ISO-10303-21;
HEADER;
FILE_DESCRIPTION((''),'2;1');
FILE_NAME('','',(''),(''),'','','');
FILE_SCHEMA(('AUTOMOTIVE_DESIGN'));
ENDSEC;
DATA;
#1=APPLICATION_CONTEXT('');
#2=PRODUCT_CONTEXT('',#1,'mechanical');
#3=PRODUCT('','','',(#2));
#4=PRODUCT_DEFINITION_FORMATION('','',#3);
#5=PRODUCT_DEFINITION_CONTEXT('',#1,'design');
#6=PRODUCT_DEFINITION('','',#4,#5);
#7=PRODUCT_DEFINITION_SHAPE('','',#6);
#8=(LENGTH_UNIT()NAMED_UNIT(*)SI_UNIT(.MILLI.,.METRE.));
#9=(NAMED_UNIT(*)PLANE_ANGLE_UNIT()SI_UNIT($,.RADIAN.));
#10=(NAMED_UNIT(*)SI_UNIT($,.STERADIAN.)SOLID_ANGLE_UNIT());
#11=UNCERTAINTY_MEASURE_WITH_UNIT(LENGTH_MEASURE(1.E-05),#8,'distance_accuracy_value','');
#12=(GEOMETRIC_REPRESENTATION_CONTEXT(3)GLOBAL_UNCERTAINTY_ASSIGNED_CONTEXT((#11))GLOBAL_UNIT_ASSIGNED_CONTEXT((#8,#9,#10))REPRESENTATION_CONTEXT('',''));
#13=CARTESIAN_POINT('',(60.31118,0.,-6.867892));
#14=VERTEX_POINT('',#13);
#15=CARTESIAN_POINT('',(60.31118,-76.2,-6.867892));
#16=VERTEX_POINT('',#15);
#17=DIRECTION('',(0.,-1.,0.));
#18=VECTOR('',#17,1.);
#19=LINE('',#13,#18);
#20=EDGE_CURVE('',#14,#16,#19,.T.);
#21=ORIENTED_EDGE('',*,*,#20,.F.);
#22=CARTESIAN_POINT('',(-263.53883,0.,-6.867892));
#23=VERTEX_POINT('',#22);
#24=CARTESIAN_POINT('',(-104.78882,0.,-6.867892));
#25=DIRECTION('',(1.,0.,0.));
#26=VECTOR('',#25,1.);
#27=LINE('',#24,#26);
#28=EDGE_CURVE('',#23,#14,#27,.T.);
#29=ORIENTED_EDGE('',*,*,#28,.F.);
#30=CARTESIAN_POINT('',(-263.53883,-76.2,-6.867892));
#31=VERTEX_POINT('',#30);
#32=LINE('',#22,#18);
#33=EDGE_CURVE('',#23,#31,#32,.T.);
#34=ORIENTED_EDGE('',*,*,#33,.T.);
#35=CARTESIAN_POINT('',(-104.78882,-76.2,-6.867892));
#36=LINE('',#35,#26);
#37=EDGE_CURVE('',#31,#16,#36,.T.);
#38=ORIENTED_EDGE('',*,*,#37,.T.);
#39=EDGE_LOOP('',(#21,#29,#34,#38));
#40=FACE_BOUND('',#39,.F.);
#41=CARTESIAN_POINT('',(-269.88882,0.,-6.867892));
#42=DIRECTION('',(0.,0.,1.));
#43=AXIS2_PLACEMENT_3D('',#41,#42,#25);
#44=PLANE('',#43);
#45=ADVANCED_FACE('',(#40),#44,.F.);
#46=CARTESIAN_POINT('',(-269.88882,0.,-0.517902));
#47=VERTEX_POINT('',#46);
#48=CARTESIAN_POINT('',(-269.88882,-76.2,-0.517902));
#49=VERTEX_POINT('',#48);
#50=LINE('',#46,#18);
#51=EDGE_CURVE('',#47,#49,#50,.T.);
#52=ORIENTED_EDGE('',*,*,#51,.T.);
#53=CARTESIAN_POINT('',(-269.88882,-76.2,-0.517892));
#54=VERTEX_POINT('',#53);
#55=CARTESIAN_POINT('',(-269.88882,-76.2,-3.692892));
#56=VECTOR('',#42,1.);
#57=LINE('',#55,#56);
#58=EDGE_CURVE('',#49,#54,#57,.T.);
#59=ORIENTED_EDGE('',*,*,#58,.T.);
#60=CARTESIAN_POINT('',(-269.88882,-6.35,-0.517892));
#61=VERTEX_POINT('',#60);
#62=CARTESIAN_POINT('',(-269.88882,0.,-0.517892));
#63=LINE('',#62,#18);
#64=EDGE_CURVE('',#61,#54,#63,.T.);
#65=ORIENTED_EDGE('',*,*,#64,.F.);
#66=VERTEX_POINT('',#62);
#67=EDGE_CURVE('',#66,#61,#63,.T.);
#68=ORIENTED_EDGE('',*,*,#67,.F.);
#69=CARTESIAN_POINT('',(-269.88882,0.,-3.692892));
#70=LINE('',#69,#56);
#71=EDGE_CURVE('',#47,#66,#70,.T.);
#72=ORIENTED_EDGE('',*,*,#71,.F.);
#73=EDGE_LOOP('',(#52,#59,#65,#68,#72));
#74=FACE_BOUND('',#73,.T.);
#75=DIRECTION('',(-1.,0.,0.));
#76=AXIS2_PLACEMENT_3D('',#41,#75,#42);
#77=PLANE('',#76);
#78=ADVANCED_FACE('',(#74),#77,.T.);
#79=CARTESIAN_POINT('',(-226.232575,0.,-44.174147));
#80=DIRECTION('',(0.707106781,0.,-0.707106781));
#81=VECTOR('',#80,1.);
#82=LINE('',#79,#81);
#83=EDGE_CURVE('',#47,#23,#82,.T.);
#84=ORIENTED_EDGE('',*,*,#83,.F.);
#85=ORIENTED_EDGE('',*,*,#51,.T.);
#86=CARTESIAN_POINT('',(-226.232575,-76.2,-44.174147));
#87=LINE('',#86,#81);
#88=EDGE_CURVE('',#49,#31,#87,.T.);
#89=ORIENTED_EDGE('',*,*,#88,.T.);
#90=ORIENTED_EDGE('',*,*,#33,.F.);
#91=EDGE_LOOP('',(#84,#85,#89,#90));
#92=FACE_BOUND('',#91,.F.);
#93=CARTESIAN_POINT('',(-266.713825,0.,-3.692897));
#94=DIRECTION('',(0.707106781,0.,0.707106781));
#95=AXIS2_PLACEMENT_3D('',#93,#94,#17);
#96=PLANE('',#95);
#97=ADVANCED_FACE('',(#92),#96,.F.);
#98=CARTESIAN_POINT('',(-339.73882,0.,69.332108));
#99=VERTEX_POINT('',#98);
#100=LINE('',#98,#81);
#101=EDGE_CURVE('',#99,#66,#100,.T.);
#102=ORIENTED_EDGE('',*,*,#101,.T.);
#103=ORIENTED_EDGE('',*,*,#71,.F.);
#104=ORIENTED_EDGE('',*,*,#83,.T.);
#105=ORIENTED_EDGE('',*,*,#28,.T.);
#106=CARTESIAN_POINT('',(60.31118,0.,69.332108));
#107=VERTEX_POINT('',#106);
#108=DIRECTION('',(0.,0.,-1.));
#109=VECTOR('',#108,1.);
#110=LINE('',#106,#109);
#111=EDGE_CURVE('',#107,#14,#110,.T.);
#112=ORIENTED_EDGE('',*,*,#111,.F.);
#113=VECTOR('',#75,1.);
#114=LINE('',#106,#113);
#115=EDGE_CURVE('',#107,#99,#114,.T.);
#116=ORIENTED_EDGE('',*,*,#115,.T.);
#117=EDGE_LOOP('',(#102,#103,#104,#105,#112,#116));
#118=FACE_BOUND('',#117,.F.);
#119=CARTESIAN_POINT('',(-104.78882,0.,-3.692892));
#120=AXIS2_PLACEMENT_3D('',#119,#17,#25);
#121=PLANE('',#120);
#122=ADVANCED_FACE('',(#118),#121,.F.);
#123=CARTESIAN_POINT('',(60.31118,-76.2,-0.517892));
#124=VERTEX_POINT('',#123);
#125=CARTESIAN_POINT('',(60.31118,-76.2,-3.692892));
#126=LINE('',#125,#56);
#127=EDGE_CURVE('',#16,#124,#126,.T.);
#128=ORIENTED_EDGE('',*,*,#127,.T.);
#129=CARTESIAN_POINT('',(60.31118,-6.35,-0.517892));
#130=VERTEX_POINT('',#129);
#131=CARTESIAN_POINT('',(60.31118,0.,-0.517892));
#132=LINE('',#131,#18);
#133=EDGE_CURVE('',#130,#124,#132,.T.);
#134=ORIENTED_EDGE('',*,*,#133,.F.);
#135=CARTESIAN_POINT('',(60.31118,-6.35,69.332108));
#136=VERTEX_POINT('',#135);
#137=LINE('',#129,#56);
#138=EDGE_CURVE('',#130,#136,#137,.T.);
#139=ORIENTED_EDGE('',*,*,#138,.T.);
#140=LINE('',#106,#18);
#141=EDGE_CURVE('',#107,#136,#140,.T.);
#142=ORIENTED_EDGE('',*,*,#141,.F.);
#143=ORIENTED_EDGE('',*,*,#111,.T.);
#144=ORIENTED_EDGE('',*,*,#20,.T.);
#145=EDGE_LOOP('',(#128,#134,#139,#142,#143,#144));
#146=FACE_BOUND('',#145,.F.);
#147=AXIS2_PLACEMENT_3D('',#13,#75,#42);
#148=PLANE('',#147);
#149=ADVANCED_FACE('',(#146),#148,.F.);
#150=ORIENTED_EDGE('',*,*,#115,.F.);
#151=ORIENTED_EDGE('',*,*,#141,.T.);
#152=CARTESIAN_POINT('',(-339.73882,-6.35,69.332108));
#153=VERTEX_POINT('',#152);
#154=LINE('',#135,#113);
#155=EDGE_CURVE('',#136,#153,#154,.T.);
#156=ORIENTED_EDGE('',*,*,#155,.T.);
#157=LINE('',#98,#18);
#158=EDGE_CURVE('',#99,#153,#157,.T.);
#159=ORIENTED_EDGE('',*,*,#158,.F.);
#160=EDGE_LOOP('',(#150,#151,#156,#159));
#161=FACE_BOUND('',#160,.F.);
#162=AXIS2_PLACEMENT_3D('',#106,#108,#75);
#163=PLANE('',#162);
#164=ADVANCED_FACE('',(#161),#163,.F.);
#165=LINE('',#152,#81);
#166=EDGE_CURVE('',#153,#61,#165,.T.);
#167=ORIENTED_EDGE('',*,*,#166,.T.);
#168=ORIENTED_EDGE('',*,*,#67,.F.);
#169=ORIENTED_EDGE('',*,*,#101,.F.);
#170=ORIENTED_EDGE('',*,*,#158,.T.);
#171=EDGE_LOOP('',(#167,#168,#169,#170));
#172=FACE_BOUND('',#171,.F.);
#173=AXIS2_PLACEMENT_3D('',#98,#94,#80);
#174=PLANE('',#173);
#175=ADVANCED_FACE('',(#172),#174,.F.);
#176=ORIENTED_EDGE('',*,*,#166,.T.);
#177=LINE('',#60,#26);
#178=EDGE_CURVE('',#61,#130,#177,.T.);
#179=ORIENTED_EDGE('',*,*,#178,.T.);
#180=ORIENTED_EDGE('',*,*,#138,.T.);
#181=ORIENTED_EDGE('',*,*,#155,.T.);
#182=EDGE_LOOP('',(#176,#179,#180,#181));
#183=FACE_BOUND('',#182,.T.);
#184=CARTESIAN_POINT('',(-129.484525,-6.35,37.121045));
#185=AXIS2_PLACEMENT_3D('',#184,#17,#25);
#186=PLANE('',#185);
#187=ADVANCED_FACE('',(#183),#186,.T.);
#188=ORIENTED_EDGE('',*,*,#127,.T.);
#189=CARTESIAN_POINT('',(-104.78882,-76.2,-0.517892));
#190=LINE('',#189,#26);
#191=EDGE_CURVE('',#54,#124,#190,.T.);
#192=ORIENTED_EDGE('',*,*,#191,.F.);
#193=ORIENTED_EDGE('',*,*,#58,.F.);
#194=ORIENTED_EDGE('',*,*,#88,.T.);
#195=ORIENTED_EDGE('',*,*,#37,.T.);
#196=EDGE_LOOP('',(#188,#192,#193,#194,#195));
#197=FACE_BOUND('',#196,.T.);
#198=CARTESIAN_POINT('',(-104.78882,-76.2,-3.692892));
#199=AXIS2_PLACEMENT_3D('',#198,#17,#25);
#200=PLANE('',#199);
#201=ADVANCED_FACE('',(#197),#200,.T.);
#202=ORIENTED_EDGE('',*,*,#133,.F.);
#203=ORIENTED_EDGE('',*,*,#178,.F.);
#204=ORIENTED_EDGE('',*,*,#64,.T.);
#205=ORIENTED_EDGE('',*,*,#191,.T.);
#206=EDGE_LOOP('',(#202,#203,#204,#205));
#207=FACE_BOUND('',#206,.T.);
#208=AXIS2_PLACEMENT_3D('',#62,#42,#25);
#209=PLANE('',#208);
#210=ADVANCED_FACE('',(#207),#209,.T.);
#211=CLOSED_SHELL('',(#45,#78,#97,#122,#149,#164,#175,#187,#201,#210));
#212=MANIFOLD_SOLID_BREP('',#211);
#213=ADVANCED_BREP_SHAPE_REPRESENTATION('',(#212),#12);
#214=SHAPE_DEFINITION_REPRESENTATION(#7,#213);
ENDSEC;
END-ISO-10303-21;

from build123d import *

# Parameters (mm, degrees)
F1_DEPTH = 6.35
F0_W     = 330.2
F0_H     = 6.35
F2_DEPTH = 76.2
F3_SIZE  = 6.34999


# Not quite as in the source:
# - a fillet or chamfer is up to 0.001 mm smaller than in the source, because OpenCascade refuses the exact size


with BuildPart() as f1:
    # F0 (on Front) → F1 (new body)
    with BuildSketch(Plane.XZ):
        Polygon((-339.7388204469, 69.3321084814), (-269.8888204469, -0.5178915186), (60.3111795531, -0.5178915186), (60.3111795531, 69.3321084814), align=None)
    extrude(amount=F1_DEPTH)

    # F0 (on Front) → F2 (join)
    with BuildSketch(Plane.XZ):
        with Locations((-104.7888204469, -3.6928915186)):
            Rectangle(F0_W, F0_H)
    extrude(amount=F2_DEPTH)

    # F3 (size 6.35 in the source; OpenCascade refuses exactly that, so slightly less here)
    f3_edges = [f1.edges().sort_by_distance(p)[0] for p in [
        (-269.88882, -38.1, -6.867892),
    ]]
    chamfer(f3_edges, length=F3_SIZE)


solid = f1.part
